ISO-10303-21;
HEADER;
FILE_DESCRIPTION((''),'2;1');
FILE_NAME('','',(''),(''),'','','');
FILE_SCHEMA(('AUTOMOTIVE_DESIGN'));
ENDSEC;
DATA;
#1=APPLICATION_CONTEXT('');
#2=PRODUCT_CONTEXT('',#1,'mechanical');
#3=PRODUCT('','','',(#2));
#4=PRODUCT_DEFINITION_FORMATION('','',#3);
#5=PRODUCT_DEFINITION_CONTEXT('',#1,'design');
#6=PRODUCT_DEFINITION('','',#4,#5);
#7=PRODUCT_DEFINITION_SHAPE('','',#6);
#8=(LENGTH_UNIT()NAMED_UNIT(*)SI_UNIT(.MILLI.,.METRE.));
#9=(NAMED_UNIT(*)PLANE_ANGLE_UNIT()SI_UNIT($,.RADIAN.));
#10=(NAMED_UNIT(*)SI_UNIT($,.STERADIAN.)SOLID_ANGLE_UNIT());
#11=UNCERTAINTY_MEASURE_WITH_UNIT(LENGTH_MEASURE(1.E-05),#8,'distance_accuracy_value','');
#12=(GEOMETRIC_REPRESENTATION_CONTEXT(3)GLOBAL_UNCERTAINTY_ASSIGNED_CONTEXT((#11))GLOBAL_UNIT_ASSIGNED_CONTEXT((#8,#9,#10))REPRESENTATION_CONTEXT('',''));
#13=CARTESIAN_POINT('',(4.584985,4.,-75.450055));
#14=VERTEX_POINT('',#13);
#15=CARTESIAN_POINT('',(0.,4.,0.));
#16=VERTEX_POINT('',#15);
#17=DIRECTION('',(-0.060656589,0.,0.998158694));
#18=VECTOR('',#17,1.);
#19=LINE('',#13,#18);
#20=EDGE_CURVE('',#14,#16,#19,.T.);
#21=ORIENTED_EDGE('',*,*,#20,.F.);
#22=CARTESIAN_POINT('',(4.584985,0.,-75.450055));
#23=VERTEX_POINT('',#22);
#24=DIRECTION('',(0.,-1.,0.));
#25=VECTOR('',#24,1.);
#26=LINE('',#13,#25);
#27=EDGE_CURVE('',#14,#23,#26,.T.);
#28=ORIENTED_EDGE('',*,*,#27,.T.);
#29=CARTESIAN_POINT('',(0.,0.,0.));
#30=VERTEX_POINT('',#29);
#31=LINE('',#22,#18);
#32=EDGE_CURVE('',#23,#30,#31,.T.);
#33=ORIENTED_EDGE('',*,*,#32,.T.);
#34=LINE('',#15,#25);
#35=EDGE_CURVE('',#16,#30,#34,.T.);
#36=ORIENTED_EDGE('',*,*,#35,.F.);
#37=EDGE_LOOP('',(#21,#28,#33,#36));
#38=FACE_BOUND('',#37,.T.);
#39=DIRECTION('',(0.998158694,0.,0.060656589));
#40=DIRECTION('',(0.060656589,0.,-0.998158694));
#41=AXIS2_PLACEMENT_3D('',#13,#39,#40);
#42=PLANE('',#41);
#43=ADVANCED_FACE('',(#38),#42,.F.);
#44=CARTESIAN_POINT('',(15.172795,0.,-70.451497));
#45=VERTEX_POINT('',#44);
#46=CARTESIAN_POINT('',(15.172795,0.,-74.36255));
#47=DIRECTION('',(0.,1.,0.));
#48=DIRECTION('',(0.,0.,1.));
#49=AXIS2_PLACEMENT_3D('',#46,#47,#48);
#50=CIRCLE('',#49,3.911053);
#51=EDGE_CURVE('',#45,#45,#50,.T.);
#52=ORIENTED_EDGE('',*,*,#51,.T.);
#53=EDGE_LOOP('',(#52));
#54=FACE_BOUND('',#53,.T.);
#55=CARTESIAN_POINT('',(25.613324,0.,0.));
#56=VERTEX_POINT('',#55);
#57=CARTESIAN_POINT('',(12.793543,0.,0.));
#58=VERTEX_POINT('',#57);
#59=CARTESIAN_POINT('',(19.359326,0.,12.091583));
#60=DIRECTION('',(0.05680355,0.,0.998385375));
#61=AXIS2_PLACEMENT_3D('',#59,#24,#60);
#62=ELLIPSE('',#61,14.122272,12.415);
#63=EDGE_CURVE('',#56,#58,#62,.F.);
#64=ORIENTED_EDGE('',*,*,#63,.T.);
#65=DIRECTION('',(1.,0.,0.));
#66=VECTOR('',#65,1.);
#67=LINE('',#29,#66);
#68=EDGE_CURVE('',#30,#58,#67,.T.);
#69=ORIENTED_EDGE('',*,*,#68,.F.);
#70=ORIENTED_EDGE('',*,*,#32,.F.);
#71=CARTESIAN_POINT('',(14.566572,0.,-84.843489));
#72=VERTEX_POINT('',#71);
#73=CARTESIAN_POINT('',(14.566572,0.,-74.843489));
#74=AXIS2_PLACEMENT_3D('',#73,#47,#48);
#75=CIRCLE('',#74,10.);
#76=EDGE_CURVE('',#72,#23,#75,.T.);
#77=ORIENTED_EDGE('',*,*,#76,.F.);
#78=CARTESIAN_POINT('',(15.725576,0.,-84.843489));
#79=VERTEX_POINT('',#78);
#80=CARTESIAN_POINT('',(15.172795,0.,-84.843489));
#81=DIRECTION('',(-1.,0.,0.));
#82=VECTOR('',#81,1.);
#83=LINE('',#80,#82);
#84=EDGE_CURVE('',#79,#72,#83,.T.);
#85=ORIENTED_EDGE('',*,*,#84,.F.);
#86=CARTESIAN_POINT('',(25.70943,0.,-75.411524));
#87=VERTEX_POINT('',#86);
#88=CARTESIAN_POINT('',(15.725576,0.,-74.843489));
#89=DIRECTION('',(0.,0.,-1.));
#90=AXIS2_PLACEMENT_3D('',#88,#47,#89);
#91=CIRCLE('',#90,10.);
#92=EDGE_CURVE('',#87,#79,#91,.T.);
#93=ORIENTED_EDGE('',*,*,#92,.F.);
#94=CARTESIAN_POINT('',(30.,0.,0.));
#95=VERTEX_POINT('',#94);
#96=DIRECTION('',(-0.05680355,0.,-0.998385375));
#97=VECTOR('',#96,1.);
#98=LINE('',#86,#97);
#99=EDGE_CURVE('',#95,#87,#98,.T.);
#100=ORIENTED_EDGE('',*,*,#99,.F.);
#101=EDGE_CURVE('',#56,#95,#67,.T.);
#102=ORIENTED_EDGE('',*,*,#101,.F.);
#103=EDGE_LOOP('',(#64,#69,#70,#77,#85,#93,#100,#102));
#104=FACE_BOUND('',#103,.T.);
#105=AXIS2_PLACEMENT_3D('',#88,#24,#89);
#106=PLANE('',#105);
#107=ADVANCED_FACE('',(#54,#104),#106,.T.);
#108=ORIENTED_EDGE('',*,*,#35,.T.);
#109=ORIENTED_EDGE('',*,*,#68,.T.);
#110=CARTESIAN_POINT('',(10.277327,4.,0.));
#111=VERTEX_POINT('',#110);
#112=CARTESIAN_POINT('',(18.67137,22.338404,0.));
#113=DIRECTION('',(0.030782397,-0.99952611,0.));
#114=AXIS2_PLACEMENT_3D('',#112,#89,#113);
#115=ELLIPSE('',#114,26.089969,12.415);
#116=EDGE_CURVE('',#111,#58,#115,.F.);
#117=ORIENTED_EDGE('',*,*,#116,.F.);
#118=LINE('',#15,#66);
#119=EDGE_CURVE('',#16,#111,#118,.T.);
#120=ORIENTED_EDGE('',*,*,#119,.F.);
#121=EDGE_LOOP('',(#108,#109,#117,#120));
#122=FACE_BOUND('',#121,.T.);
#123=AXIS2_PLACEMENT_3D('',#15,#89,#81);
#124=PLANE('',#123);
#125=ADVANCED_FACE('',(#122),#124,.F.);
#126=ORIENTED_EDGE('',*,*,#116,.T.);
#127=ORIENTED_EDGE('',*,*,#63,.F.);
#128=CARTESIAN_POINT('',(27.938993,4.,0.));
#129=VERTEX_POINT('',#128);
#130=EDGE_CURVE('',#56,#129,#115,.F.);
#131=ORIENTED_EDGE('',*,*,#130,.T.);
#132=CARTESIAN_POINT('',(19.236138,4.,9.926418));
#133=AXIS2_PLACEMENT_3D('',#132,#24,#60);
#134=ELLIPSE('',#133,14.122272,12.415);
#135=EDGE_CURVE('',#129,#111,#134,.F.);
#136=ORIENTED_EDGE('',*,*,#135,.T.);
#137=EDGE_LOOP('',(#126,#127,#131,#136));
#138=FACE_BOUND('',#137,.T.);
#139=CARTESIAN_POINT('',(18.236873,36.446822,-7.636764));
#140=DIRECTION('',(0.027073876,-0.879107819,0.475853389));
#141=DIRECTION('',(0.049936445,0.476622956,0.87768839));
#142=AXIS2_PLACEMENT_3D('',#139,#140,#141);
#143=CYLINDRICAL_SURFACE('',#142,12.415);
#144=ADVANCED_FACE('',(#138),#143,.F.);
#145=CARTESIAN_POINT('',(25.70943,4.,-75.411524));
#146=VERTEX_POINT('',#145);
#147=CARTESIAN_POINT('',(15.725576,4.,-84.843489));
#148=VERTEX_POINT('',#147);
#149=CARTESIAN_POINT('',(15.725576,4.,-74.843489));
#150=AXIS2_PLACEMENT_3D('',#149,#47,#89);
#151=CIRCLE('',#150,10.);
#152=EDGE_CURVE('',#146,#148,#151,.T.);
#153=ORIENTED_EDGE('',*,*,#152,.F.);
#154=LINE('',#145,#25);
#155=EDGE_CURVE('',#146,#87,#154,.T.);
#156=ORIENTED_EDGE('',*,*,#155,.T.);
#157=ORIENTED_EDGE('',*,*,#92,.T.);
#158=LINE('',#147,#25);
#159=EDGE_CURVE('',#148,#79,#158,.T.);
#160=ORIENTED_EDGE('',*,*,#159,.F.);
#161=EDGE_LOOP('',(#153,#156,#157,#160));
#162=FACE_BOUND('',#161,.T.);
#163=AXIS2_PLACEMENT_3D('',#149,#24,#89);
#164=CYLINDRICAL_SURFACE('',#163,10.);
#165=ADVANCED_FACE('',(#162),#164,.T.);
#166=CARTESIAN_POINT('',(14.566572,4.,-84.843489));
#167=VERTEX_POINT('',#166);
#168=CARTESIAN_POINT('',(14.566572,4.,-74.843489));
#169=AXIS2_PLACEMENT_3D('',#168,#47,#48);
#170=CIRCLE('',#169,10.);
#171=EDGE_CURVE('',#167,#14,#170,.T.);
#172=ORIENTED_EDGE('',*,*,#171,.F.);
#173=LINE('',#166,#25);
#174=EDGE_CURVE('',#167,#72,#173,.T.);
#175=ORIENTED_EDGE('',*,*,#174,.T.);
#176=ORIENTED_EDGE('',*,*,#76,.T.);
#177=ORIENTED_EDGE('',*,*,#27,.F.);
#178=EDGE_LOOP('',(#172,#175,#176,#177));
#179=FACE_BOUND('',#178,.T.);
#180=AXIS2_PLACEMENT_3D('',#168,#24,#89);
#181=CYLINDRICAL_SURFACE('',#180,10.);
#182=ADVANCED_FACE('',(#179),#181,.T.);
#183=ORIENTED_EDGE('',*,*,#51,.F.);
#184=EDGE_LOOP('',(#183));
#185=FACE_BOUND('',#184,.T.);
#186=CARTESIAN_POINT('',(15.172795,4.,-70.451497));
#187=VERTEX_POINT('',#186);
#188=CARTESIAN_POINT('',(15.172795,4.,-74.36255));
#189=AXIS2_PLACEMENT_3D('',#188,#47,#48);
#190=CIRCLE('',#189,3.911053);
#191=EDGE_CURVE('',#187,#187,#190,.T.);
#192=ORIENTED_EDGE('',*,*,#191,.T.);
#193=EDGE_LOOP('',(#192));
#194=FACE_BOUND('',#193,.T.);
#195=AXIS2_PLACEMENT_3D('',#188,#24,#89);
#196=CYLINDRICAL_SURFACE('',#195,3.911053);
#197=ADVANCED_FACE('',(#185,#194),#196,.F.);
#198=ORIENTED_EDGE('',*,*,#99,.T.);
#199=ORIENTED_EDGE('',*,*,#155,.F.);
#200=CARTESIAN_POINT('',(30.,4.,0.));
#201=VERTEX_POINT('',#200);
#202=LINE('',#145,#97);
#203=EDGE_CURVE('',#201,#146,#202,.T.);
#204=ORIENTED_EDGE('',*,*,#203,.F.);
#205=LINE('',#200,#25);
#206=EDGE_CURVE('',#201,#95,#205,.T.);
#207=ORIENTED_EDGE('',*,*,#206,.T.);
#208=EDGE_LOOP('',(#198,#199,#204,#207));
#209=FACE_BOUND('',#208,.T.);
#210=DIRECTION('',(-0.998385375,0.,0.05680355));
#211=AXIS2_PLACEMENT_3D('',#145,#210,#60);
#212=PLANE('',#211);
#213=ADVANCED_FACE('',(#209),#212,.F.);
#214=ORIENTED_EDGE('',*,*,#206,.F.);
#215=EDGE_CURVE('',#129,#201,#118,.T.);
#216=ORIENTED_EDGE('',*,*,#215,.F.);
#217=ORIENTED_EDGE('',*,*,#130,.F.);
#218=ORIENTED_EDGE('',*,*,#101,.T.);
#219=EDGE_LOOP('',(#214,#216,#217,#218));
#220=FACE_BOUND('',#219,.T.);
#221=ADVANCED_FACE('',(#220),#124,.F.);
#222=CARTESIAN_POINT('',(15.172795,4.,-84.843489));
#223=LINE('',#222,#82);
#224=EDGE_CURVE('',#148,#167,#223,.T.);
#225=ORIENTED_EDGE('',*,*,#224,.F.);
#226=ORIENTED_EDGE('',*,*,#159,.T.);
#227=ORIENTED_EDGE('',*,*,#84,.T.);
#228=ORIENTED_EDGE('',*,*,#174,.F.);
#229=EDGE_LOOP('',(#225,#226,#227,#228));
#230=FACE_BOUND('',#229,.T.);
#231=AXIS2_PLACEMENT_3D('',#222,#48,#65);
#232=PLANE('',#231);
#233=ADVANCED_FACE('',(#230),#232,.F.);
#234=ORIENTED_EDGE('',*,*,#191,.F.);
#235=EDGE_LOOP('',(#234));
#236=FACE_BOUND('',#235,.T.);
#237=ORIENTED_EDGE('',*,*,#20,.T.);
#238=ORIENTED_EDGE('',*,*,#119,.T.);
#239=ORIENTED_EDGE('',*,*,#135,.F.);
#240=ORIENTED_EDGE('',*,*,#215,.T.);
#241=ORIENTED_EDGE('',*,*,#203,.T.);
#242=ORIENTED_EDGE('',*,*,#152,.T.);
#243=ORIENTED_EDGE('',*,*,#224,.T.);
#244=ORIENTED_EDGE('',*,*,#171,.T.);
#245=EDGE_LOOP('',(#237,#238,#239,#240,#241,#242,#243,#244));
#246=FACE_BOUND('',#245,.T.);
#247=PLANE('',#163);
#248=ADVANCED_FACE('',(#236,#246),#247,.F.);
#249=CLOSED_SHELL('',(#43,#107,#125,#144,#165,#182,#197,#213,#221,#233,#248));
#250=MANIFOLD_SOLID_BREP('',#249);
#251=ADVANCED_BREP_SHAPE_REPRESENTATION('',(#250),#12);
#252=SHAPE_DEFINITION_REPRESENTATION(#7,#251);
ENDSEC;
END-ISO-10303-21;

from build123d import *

# Parameters (mm, degrees)
SKETCH1_R           = 3.911052803
BOSS_EXTRUDE1_DEPTH = 4
CAVITY1_OUTLINE_W   = 12.415
CAVITY1_OUTLINE_H   = 5.700748897


# Read off the part's stored shape, not the designer's step: Cavity1
with BuildPart() as part:
    # Sketch1 → Boss-Extrude1 (new body)
    with BuildSketch(Plane(origin=(0, 0, 0), x_dir=(1, 0, 0), z_dir=(0, 1, 0))):
        with BuildLine():
            Line((0, 0), (30, 0))
            Line((30, 0), (25.709430043, 75.411524479))
            ThreePointArc((25.709430043, 75.411524479), (22.592877256, 82.112613927), (15.725576294, 84.84348898))
            Line((15.725576294, 84.84348898), (15.172794511, 84.84348898))
            Line((15.172794511, 84.84348898), (14.566572295, 84.84348898))
            ThreePointArc((14.566572295, 84.84348898), (7.713312448, 82.125853257), (4.584985356, 75.450054873))
            Line((4.584985356, 75.450054873), (0, 0))
        make_face()
        with Locations(Location((15.172794511, 74.362549593, 0), (0, 0, 270))):
            Circle(SKETCH1_R, mode=Mode.SUBTRACT)
    extrude(amount=BOSS_EXTRUDE1_DEPTH)

    # Cavity1 outline → Cavity1 (revolve, cut)
    with BuildSketch(Plane(origin=(19.189357323, 5.518997389, 9.104198025), x_dir=(0.9996334354377989, 0.02380958372693479, -0.012887919831146358), z_dir=(0, -0.47602788353146924, -0.8794301871669804))):
        with Locations((6.2075, -2.156922497)):
            Rectangle(CAVITY1_OUTLINE_W, CAVITY1_OUTLINE_H)
    revolve(axis=Axis((19.189357323, 5.518997389, 9.104198025), (0.027073875873690006, -0.8791078192254351, 0.47585338857874704)), mode=Mode.SUBTRACT)


solid = part.part
